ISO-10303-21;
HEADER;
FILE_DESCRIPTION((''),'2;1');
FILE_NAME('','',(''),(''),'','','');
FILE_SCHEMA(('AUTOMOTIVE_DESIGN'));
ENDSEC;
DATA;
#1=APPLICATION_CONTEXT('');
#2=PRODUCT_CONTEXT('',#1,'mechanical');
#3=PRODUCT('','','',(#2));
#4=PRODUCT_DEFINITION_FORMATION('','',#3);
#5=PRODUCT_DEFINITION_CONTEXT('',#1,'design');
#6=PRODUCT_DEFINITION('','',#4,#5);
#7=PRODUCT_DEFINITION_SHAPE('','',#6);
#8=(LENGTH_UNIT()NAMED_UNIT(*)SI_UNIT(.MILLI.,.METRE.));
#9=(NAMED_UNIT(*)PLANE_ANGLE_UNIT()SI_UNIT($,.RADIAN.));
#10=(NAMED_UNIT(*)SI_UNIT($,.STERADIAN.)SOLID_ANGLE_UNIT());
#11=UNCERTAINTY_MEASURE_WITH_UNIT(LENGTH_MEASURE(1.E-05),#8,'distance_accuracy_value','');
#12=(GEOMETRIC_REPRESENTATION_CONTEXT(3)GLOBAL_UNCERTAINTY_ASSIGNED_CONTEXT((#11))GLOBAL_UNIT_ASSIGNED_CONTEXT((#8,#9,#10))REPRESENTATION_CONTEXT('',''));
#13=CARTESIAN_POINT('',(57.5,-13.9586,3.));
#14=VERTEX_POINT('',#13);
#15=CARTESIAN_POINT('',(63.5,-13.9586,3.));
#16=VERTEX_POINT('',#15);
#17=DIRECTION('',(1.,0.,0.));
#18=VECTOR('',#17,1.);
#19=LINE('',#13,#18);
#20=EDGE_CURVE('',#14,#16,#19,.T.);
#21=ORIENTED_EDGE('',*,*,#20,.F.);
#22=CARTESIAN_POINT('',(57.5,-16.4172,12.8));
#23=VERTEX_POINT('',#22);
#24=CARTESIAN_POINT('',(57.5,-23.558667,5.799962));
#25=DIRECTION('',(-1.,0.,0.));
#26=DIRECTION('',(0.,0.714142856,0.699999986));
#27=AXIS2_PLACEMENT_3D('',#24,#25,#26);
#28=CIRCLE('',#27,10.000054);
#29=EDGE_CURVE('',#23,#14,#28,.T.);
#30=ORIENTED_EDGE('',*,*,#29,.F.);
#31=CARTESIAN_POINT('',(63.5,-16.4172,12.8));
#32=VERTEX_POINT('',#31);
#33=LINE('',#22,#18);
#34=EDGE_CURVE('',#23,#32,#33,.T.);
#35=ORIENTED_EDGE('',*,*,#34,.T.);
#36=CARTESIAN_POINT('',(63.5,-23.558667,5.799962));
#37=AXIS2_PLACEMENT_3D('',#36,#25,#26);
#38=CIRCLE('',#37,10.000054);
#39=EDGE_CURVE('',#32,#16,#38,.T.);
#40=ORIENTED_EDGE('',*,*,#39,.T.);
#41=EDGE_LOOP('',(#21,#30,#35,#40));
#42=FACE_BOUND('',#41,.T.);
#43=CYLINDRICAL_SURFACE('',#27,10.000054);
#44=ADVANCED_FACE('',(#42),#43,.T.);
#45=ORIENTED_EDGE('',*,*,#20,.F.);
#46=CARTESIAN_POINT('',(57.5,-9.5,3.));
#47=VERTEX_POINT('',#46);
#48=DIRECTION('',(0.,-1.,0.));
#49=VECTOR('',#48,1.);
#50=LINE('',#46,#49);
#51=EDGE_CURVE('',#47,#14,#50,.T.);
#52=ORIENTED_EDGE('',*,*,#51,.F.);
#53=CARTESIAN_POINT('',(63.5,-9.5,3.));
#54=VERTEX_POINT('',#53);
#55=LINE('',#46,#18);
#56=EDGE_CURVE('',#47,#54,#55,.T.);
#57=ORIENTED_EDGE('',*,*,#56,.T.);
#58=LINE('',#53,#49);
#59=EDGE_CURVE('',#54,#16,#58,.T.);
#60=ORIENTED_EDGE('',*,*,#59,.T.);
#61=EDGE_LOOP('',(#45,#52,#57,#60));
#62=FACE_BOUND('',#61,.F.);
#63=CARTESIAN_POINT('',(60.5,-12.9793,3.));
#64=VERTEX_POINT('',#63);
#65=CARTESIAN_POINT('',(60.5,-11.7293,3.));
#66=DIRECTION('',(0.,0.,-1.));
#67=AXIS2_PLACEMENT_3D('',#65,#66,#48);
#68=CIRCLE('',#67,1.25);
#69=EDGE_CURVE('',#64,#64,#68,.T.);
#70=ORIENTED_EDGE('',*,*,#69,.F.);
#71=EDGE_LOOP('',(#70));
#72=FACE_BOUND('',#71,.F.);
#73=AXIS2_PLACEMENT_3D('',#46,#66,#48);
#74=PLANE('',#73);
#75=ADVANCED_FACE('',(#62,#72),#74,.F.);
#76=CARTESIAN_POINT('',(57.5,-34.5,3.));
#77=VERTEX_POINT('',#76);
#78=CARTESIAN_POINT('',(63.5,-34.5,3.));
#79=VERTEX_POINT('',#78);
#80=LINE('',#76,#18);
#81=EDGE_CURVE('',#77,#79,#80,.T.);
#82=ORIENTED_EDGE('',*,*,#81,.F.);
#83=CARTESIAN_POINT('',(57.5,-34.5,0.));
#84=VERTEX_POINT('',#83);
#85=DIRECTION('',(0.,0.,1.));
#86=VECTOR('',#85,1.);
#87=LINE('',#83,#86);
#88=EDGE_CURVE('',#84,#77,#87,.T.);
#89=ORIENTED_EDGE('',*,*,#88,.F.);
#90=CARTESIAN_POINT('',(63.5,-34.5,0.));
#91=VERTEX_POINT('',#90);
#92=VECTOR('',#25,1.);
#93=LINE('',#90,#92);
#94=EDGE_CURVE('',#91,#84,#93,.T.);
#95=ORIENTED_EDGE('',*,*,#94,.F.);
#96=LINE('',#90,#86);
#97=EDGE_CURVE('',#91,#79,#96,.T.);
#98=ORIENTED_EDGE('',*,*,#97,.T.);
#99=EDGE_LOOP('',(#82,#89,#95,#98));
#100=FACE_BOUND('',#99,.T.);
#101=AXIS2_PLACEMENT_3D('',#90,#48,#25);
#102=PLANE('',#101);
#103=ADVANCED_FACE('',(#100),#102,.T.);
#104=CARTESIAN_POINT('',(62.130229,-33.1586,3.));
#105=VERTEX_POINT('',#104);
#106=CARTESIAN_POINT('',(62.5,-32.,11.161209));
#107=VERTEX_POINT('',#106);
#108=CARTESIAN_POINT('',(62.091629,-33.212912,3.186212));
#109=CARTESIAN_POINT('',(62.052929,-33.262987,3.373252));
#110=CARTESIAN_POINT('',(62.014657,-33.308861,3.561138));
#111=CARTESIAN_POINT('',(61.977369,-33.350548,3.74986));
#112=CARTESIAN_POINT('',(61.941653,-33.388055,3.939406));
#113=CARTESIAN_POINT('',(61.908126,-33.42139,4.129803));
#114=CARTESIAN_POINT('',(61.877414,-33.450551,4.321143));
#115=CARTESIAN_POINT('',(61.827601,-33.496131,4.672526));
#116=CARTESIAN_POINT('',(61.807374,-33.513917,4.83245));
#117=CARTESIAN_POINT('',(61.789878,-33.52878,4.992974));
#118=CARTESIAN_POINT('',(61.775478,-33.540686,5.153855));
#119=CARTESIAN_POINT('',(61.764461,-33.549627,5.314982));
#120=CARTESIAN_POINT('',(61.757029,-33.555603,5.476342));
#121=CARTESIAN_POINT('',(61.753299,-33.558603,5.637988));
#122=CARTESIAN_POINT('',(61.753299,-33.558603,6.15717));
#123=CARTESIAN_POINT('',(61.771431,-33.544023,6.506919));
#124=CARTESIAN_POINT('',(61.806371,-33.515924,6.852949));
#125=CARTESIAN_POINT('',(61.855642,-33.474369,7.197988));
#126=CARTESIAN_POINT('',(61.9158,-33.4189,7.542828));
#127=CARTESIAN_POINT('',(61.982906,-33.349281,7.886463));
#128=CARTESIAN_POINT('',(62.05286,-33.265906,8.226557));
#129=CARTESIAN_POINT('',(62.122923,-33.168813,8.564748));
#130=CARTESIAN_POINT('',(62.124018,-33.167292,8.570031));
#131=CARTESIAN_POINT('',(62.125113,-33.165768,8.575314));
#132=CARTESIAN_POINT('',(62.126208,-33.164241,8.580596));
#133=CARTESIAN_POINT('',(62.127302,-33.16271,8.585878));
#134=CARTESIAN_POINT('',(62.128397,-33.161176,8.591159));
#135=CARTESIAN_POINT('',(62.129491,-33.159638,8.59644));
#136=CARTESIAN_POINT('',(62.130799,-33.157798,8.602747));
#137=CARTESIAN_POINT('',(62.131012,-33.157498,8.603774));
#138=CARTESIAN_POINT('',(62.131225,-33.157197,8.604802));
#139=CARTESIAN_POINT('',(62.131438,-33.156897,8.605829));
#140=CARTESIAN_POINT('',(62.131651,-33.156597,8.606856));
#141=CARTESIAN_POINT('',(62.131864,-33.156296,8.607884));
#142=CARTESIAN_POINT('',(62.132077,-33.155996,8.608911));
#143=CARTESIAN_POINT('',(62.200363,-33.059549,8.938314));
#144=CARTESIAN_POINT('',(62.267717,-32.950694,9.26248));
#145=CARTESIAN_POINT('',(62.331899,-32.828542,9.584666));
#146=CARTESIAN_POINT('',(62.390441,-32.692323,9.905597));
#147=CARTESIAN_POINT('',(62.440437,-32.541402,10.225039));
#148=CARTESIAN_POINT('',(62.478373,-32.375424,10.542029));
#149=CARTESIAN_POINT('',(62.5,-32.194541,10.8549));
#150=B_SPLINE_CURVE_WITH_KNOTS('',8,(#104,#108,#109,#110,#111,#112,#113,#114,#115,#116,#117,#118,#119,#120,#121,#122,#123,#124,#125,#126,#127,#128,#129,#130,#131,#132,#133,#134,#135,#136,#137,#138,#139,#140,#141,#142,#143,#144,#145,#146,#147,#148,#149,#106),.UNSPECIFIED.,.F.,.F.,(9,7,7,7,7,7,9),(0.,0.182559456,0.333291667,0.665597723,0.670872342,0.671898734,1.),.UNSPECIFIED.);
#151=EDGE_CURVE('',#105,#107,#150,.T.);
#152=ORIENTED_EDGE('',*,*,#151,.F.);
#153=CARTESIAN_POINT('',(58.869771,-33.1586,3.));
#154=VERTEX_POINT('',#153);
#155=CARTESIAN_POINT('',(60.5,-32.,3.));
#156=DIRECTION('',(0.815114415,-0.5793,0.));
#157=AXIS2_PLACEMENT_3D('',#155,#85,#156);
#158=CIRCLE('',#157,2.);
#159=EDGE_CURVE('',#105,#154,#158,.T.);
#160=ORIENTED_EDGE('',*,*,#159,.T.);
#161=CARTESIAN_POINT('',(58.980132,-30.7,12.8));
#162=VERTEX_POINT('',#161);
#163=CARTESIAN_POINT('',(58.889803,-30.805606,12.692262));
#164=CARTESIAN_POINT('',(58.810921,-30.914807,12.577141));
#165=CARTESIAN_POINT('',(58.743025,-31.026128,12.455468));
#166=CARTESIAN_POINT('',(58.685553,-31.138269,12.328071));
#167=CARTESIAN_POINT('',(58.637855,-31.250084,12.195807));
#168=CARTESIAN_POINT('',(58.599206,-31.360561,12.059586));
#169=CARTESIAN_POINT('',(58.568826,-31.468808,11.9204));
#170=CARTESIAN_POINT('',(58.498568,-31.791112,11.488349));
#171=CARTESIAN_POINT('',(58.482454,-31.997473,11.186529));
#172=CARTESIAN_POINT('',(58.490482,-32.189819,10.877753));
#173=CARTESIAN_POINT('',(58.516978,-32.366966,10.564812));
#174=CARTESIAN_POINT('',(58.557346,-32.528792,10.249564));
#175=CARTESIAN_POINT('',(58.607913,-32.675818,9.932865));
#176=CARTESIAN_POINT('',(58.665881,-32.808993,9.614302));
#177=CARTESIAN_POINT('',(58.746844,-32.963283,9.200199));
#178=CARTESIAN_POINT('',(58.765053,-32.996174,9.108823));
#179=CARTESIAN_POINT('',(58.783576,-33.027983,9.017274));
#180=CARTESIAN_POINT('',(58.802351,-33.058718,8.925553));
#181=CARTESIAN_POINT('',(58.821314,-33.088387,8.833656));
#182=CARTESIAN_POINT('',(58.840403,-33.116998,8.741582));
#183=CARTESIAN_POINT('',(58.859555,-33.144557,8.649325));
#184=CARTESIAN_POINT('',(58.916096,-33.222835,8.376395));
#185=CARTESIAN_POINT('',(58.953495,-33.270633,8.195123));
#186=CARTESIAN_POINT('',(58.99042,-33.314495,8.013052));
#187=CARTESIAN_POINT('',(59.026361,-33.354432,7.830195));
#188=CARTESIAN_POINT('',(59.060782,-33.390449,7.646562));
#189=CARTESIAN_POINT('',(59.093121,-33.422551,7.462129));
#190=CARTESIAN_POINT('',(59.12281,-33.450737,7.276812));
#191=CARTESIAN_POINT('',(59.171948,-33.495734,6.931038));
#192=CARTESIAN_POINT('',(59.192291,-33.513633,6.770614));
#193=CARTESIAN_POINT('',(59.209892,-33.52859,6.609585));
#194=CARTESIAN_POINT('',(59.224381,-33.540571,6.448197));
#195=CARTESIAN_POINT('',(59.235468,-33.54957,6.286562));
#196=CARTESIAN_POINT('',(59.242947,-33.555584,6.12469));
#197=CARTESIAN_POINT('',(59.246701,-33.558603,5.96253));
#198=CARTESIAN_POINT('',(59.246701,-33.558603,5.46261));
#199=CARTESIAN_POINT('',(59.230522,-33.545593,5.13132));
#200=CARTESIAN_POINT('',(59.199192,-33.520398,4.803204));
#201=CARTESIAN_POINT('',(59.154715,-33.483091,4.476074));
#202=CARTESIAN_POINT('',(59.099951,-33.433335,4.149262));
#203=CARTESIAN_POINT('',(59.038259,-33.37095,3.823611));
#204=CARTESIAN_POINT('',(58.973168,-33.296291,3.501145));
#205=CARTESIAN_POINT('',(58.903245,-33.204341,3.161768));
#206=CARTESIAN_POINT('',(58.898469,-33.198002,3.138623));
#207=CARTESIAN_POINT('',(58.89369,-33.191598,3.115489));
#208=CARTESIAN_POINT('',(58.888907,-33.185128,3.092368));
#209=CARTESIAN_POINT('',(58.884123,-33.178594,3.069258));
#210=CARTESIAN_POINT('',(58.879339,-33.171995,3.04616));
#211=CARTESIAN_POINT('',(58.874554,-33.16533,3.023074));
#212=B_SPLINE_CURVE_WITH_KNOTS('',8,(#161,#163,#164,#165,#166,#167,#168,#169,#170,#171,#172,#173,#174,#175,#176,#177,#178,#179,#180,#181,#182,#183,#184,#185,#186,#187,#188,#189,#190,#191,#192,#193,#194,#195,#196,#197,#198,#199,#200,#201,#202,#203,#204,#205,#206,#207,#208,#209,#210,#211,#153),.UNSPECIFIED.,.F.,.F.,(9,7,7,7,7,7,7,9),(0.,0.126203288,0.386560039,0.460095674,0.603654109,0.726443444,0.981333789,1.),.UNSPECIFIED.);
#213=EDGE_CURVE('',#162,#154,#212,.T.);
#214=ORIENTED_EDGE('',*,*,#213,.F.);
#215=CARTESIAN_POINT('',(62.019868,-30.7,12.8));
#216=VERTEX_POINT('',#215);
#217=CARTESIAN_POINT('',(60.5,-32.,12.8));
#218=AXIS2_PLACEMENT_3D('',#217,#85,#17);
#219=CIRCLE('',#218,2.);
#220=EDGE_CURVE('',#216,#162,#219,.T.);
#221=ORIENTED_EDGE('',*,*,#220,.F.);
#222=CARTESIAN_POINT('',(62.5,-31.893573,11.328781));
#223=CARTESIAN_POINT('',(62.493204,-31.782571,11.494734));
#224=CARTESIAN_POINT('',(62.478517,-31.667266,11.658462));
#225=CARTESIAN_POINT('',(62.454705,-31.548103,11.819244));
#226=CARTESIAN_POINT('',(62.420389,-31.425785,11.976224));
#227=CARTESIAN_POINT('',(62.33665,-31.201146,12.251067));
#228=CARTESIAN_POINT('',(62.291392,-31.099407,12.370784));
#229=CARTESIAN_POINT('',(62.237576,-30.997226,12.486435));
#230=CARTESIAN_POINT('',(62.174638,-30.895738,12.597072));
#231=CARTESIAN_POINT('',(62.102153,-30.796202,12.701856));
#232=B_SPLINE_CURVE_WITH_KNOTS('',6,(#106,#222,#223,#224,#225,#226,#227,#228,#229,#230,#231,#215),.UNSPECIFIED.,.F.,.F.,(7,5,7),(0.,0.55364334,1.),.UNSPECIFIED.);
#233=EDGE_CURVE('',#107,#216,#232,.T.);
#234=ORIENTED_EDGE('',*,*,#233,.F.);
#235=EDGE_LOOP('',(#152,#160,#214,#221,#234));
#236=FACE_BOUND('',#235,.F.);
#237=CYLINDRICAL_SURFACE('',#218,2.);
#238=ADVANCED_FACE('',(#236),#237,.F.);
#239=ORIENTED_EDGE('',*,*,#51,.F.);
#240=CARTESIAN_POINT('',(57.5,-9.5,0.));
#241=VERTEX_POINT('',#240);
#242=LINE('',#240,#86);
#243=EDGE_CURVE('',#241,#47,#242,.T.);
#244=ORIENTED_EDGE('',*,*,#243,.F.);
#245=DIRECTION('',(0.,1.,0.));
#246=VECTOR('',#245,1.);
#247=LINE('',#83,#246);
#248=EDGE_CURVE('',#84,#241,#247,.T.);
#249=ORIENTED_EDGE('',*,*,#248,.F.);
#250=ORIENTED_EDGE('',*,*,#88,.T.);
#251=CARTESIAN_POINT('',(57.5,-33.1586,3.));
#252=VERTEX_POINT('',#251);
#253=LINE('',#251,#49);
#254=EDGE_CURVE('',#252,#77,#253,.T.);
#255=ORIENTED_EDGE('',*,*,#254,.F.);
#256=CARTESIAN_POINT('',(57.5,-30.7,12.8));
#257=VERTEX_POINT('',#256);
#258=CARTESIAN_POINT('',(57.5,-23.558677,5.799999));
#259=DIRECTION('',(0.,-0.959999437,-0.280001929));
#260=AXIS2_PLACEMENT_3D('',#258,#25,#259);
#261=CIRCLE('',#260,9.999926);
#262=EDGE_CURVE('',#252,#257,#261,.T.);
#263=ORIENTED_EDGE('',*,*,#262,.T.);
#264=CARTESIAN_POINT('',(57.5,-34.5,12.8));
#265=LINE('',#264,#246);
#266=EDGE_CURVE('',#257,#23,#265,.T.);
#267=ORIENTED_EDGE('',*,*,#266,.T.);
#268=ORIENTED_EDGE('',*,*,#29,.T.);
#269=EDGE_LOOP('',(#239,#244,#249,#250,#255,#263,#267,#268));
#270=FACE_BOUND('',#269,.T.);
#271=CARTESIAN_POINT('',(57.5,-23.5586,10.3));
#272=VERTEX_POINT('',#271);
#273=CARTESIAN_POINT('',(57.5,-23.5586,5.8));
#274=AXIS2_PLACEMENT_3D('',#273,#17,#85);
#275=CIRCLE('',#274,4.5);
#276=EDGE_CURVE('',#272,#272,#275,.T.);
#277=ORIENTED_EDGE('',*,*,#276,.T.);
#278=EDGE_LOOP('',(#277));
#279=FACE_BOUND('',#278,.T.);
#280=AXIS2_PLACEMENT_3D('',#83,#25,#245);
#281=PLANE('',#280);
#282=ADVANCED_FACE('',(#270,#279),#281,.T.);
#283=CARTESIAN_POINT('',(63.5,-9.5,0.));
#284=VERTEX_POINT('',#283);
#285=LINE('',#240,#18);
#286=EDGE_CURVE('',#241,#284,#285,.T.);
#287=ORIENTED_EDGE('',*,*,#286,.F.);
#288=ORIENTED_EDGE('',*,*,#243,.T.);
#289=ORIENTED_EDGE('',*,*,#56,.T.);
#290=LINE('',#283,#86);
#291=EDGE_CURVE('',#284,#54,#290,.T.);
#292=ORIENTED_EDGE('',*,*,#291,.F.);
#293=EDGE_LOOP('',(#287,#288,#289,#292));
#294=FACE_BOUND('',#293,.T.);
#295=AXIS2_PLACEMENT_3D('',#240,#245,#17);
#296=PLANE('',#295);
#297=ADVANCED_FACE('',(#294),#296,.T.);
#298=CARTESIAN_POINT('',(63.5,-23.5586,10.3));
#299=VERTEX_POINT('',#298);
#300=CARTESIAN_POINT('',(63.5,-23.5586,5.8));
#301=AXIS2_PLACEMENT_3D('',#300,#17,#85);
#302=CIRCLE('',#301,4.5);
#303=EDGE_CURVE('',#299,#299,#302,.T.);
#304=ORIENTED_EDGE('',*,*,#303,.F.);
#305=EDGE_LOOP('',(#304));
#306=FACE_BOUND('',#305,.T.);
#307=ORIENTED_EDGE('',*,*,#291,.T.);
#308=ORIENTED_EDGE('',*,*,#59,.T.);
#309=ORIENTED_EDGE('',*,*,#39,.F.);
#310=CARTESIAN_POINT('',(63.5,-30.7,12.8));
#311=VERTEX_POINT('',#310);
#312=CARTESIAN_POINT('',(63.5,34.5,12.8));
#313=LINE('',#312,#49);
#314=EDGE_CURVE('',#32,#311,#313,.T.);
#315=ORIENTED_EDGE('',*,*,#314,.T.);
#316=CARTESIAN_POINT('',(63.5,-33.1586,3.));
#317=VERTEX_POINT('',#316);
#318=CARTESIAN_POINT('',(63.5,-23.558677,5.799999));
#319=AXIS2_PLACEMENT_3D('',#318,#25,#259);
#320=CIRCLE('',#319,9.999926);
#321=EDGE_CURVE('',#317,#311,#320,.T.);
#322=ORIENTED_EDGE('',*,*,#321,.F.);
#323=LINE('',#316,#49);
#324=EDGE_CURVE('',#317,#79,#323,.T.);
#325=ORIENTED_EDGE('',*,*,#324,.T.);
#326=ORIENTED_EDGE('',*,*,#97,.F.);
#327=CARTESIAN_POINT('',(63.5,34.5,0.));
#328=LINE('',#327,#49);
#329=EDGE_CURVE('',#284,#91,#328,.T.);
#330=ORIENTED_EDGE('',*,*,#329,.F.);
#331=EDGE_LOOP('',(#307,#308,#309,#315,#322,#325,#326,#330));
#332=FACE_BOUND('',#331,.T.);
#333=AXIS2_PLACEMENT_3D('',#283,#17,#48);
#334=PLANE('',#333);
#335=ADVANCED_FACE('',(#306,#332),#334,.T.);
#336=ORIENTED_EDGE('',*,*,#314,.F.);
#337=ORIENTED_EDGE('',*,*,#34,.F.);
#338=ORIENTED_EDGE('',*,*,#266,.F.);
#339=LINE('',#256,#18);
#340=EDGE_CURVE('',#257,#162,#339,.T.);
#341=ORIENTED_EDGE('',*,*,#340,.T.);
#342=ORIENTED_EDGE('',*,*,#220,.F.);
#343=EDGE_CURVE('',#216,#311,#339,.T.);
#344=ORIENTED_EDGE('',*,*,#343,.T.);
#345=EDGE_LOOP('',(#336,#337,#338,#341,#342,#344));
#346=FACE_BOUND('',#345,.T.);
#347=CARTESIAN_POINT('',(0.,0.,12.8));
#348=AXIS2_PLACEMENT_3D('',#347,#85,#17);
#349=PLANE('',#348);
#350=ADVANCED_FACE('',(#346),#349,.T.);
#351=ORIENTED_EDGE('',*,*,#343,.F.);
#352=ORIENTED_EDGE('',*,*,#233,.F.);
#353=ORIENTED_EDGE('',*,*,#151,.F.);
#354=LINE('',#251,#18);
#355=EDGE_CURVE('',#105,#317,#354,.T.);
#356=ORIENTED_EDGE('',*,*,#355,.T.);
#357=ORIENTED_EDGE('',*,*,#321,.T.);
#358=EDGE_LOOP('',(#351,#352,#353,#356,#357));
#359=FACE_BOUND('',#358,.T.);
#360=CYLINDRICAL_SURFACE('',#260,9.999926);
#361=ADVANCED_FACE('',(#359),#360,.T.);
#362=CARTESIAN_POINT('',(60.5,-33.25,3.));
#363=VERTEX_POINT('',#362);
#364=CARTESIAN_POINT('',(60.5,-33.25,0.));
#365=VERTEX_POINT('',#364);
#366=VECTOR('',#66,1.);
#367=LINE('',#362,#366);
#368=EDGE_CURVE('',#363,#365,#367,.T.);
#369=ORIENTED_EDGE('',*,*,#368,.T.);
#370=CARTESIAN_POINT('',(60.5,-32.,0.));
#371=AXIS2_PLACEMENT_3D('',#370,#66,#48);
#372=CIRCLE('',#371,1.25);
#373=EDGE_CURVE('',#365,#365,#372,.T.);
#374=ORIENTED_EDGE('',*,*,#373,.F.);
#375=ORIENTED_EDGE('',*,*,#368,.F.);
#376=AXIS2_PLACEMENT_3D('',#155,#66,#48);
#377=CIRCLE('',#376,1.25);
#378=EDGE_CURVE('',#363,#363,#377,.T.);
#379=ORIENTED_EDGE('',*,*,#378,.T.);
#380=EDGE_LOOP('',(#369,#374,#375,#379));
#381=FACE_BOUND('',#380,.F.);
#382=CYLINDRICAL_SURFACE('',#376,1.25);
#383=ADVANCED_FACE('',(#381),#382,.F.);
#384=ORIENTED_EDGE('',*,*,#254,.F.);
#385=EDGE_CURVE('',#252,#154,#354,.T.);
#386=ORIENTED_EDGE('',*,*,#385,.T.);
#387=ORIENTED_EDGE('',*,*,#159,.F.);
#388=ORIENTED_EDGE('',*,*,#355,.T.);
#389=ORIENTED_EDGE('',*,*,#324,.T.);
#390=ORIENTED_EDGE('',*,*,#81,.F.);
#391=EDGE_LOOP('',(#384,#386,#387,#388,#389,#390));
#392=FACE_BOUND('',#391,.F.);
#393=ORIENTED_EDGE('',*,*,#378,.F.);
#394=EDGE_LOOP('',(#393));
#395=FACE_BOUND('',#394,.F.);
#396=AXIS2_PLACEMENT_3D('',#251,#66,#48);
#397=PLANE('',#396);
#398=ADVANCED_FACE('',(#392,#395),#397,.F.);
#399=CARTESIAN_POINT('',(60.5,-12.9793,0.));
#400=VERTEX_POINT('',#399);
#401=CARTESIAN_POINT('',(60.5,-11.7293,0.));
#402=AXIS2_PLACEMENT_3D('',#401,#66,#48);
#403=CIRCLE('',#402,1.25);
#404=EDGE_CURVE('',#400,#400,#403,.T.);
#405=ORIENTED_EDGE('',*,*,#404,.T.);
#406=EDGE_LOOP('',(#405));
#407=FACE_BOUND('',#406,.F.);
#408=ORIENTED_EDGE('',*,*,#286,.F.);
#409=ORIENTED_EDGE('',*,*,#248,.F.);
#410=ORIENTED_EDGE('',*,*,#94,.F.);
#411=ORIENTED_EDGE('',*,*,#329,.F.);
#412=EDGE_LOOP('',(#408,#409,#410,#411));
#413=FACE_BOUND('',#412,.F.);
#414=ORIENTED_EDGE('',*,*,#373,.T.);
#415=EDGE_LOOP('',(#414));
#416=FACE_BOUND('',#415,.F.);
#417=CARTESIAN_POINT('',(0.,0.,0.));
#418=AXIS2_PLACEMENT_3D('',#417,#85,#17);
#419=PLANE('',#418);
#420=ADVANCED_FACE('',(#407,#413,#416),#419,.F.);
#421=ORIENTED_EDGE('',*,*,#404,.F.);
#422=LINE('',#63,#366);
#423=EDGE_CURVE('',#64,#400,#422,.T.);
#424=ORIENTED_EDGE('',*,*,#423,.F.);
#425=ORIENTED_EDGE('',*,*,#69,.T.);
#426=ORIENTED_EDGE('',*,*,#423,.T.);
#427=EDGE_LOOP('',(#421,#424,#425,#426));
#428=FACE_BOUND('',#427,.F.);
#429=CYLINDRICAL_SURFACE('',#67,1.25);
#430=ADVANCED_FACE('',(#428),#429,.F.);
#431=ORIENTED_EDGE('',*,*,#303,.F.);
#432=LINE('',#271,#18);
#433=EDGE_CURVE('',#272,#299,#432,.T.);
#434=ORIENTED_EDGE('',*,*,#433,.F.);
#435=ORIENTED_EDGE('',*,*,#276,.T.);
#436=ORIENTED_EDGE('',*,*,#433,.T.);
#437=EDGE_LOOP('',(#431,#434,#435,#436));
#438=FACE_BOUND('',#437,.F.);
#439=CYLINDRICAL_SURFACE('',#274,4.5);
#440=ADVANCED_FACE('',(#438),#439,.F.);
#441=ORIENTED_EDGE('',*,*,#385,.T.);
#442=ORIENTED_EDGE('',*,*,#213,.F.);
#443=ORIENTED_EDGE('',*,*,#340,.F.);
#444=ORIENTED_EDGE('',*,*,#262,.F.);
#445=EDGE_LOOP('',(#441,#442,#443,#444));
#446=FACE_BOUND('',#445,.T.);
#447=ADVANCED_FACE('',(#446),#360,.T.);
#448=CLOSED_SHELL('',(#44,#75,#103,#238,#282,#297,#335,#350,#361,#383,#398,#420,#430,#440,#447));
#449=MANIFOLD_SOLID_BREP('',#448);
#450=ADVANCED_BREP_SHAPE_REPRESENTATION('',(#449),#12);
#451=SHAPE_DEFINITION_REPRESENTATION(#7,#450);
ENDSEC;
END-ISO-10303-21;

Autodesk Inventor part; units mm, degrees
ref_plane "YZ Plane" through (0, 0, 0) normal (1, 0, 0) x (0, 1, 0)
ref_plane "XZ Plane" through (0, 0, 0) normal (0, 1, 0) x (-1, 0, 0)
ref_plane "Plano de trabajo1" through (64.5, -49.5, 12.8) normal (0, 0, 1) x (1, 0, 0)
sketch "Boceto1" plane through (0, 0, 0) normal (0, 0, 1) x (1, 0, 0)
  line L0 (-63.5, 34.5) -> (63.5, 34.5)
  line L1 (63.5, -34.5) -> (-63.5, -34.5)
  line L2 (63.5, 34.5) -> (63.5, -34.5)
  line L3 (64.5, -16.5586) -> (64.5, -23.5586)
  line L4 (64.5, -23.5586) -> (64.5, -44.5)
  line L5 (64.5, -49.5) -> (64.5, -23.5586)
  line L6 (64.5, -16.5586) -> (64.5, -23.5586)
  line L7 (63.5, -34.5) -> (57.5, -34.5)
  line L8 (57.5, -34.5) -> (57.5, -9.5)
  line L9 (57.5, -9.5) -> (63.5, -9.5)
  line L10 (63.5, -9.5) -> (63.5, -34.5)
  point P0 (0, 0)
extrude "Extrusión1" add sketch "Boceto1" along normal up to surface (12.8 mm away)
sketch "Boceto2" plane through (57.5, -34.5, 0) normal (-1, 0, 0) x (0, 0, 1)
  line L0 (0, 0) -> (3, 0)
  line L1 (0, 25) -> (3, 25)
  line L2 (0, 25) -> (12.8, 25) projected
  line L3 (12.8, 0) -> (12.8, 25) projected
  arc A0 (12.8, 10.9414) -> (-1.2, 10.9414) centre (5.8, 10.9414) ccw projected
  arc A1 (12.8, 18.0828) -> (3, 20.5414) centre (5.8, 10.9414) ccw
  line L4 (3, 25) -> (3, 20.5414)
  line L5 (12.8, 0) -> (12.8, 5)
  line L6 (3, 1.3414) -> (3, 0)
  line L7 (3, 0) -> (12.8, 0)
  arc A2 (3, 1.3414) -> (12.8, 3.8) centre (5.8, 10.9414) ccw
  point P0 (0, 34.5)
  dimension "d4" = 3
  dimension "d6" = 3
  dimension "d8" = 3
  dimension "d9" = 5
extrude "Extrusión2" cut sketch "Boceto2" against normal up to surface (6 mm away)
hole "Agujero1" at (57.5, -23.5586, 5.8) direction (1, 0, 0) diameter 9 end up to surface
sketch "Boceto3" plane through (57.5, -34.5, 3) normal (0, 0, 1) x (1, 0, 0)
  line L0 (0, 5) -> (6, 5) projected
  line L1 (6, 0) -> (0, 0) projected
  line L2 (6, 25) -> (6, 20.5414) projected
  line L3 (0, 25) -> (6, 25) projected
  line L4 (0, 20.5414) -> (0, 25) projected
  line L5 (0, 20.5414) -> (6, 20.5414) projected
  line L6 (6, 5) -> (0, 0)
  line L7 (0, 20.5414) -> (6, 25)
  point P0 (-57.5, 34.5)
  point P1 (3, 22.7707)
  point P2 (3, 2.5)
hole "Agujero2" at (60.5, -11.7293, 3) at (60.5, -32, 3) direction (0, 0, -1) diameter 2.5 end up to surface
sketch "Boceto4" plane through (57.5, -16.4172, 12.8) normal (0, 0, 1) x (1, 0, 0)
  arc A0 (2.5308, -16.7414) -> (3.4692, -16.7414) centre (3, -15.5828) ccw projected
  circle A1 centre (3, -15.5828) radius 2
  point P0 (-57.5, 16.4172)
  dimension "d30" = 4
extrude "Extrusión3" cut sketch "Boceto4" against normal up to surface (9.8 mm away)
properties part number "soporteDerecho"
